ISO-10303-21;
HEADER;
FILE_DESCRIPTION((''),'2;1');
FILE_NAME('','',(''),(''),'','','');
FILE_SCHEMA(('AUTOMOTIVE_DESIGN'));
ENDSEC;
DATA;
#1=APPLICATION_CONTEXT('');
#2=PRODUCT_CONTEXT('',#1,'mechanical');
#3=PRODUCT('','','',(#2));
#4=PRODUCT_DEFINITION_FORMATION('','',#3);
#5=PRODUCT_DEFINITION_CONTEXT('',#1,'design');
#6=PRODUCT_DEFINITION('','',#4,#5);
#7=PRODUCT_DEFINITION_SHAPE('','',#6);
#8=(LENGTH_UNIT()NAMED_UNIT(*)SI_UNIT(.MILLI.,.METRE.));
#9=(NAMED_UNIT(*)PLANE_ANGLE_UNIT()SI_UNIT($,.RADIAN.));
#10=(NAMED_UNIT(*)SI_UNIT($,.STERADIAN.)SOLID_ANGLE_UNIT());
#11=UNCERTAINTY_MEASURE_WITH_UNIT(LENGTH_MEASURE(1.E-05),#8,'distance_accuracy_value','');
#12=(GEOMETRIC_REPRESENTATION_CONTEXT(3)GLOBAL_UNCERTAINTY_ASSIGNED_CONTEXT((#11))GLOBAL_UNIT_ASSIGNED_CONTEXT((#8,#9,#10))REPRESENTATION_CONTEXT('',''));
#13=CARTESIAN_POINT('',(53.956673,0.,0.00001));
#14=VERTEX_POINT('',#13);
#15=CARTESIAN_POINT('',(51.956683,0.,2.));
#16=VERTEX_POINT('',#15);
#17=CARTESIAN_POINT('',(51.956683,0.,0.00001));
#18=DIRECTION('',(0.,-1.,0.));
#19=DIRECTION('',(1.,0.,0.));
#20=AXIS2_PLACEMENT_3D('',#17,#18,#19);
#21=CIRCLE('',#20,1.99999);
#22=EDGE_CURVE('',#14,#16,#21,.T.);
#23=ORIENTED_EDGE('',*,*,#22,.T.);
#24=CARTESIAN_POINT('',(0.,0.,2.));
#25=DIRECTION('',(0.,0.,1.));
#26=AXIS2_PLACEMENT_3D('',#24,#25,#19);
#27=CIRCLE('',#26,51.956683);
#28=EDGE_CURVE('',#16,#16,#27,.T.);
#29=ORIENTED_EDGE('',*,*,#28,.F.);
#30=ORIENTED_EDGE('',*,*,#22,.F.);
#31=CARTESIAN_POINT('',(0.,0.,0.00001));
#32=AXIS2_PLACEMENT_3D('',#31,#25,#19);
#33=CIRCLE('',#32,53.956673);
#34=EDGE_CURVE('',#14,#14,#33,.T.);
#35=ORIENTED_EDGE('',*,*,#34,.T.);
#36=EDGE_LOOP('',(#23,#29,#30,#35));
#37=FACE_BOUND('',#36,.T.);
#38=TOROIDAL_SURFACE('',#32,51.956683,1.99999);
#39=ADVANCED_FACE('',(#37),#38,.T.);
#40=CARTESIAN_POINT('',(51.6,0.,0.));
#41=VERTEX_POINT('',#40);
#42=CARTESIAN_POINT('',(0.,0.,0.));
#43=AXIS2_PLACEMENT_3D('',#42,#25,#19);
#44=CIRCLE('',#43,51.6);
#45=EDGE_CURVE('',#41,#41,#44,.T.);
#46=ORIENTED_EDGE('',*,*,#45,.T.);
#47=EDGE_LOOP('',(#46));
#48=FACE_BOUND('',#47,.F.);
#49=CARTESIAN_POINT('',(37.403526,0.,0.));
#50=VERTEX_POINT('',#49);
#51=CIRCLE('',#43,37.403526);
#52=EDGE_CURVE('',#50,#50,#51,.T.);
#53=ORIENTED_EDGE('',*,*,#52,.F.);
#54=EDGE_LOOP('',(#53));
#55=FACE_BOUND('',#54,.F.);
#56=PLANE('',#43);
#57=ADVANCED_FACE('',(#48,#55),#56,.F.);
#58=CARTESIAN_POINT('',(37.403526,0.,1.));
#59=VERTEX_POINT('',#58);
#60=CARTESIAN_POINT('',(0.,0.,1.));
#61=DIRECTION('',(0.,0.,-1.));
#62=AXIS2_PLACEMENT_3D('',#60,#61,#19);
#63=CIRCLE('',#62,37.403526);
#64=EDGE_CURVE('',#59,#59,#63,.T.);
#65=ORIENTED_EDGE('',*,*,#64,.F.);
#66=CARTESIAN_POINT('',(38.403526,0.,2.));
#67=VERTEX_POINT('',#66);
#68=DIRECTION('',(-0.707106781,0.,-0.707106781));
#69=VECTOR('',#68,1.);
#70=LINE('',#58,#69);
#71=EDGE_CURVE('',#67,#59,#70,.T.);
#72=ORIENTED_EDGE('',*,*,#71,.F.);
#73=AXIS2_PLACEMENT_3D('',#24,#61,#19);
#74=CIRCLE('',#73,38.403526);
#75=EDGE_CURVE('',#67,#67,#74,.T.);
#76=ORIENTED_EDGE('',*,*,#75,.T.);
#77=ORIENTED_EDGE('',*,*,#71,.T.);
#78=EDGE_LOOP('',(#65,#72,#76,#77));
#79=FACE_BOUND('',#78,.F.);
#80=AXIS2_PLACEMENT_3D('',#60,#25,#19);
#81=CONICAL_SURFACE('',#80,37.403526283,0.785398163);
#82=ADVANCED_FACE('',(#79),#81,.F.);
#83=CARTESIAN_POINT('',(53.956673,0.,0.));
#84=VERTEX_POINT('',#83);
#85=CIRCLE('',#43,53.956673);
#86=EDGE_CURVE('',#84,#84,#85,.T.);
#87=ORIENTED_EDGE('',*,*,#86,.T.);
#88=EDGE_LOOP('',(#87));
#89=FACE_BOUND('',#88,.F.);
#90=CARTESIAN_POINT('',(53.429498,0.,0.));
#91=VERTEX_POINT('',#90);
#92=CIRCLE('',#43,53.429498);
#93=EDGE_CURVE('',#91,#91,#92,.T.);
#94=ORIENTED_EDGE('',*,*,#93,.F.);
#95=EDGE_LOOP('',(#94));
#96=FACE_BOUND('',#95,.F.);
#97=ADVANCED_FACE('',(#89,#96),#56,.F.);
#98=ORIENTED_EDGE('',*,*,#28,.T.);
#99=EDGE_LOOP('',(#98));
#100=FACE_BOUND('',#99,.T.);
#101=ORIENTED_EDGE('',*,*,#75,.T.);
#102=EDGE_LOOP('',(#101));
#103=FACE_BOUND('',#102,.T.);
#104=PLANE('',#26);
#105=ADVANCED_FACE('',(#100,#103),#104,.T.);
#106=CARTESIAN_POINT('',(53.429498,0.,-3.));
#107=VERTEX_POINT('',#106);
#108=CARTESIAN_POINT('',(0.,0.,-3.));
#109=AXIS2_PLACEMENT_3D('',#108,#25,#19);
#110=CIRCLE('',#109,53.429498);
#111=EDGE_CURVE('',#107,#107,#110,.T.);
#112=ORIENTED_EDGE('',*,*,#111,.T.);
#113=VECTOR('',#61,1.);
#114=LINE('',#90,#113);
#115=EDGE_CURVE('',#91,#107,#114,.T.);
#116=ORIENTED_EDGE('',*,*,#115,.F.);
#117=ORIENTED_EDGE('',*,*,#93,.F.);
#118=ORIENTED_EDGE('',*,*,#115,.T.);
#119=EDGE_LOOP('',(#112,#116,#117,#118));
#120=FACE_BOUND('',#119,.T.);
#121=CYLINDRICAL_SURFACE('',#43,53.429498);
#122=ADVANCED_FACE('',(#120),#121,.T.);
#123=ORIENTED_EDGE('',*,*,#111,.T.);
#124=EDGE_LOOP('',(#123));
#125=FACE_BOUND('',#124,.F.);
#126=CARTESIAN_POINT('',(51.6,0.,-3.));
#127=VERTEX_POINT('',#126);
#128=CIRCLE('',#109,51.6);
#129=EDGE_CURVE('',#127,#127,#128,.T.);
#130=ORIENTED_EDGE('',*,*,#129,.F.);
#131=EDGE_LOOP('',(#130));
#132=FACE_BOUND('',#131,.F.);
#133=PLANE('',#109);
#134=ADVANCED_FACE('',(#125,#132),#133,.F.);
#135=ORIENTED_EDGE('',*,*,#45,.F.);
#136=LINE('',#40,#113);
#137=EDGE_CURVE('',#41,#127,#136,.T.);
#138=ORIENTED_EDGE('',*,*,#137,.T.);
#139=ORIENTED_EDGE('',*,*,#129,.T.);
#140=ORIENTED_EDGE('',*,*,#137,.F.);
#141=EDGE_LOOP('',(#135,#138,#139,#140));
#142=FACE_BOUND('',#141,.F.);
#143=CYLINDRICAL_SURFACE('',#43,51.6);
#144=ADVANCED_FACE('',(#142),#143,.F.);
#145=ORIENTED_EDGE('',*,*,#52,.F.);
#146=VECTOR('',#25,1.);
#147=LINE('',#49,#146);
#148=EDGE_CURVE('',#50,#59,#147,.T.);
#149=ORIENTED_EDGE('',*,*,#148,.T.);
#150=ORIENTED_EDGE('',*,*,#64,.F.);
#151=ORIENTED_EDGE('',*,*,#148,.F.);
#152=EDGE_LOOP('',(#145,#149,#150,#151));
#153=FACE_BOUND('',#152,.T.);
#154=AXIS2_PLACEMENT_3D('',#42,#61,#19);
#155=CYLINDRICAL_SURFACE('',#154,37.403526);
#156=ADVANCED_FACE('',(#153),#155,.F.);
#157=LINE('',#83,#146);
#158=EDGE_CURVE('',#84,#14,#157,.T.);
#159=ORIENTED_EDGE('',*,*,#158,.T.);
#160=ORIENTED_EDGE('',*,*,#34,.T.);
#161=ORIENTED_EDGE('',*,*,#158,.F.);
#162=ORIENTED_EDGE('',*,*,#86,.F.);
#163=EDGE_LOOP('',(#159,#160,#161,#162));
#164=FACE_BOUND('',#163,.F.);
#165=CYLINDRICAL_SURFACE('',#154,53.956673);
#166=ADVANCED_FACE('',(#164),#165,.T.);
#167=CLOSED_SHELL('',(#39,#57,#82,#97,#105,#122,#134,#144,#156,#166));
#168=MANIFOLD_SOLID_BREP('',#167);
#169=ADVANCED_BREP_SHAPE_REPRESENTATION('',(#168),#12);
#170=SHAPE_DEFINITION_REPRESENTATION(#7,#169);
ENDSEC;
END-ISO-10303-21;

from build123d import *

# Parameters (mm, degrees)
F0_R     = 53.4294983316
F0_R_2   = 51.6
F1_DEPTH = 3
F3_R     = 53.9566734819
F4_DEPTH = 2
F5_R     = 1.99999
F6_R     = 37.4035262833
F7_DEPTH = 3
F8_SIZE2 = 1
F8_SIZE  = 1


# Not quite as in the source:
# - a fillet or chamfer is up to 0.001 mm smaller than in the source, because OpenCascade refuses the exact size


with BuildPart() as f1:
    # F0 (on Top) → F1 (new body)
    with BuildSketch(Plane.XY):
        Circle(F0_R)
        Circle(F0_R_2, mode=Mode.SUBTRACT)
    extrude(amount=-F1_DEPTH)

    # F3 (on offset) → F4 (join)
    with BuildSketch(Plane.XY):
        Circle(F3_R)
    extrude(amount=F4_DEPTH)

    # F5 (radius 2 in the source; OpenCascade refuses exactly that, so slightly less here)
    f5_edges = [f1.edges().sort_by_distance(p)[0] for p in [
        (-53.956673, 0, 2),
    ]]
    fillet(f5_edges, radius=F5_R)

    # F6 (on offset) → F7 (cut)
    with BuildSketch(Plane.XY):
        Circle(F6_R)
    extrude(amount=F7_DEPTH, mode=Mode.SUBTRACT)

    # F8
    f8_edges = [f1.edges().sort_by_distance(p)[0] for p in [
        (-37.403526, 0, 2),
    ]]
    chamfer(f8_edges, length=F8_SIZE, length2=F8_SIZE2)


solid = f1.part
